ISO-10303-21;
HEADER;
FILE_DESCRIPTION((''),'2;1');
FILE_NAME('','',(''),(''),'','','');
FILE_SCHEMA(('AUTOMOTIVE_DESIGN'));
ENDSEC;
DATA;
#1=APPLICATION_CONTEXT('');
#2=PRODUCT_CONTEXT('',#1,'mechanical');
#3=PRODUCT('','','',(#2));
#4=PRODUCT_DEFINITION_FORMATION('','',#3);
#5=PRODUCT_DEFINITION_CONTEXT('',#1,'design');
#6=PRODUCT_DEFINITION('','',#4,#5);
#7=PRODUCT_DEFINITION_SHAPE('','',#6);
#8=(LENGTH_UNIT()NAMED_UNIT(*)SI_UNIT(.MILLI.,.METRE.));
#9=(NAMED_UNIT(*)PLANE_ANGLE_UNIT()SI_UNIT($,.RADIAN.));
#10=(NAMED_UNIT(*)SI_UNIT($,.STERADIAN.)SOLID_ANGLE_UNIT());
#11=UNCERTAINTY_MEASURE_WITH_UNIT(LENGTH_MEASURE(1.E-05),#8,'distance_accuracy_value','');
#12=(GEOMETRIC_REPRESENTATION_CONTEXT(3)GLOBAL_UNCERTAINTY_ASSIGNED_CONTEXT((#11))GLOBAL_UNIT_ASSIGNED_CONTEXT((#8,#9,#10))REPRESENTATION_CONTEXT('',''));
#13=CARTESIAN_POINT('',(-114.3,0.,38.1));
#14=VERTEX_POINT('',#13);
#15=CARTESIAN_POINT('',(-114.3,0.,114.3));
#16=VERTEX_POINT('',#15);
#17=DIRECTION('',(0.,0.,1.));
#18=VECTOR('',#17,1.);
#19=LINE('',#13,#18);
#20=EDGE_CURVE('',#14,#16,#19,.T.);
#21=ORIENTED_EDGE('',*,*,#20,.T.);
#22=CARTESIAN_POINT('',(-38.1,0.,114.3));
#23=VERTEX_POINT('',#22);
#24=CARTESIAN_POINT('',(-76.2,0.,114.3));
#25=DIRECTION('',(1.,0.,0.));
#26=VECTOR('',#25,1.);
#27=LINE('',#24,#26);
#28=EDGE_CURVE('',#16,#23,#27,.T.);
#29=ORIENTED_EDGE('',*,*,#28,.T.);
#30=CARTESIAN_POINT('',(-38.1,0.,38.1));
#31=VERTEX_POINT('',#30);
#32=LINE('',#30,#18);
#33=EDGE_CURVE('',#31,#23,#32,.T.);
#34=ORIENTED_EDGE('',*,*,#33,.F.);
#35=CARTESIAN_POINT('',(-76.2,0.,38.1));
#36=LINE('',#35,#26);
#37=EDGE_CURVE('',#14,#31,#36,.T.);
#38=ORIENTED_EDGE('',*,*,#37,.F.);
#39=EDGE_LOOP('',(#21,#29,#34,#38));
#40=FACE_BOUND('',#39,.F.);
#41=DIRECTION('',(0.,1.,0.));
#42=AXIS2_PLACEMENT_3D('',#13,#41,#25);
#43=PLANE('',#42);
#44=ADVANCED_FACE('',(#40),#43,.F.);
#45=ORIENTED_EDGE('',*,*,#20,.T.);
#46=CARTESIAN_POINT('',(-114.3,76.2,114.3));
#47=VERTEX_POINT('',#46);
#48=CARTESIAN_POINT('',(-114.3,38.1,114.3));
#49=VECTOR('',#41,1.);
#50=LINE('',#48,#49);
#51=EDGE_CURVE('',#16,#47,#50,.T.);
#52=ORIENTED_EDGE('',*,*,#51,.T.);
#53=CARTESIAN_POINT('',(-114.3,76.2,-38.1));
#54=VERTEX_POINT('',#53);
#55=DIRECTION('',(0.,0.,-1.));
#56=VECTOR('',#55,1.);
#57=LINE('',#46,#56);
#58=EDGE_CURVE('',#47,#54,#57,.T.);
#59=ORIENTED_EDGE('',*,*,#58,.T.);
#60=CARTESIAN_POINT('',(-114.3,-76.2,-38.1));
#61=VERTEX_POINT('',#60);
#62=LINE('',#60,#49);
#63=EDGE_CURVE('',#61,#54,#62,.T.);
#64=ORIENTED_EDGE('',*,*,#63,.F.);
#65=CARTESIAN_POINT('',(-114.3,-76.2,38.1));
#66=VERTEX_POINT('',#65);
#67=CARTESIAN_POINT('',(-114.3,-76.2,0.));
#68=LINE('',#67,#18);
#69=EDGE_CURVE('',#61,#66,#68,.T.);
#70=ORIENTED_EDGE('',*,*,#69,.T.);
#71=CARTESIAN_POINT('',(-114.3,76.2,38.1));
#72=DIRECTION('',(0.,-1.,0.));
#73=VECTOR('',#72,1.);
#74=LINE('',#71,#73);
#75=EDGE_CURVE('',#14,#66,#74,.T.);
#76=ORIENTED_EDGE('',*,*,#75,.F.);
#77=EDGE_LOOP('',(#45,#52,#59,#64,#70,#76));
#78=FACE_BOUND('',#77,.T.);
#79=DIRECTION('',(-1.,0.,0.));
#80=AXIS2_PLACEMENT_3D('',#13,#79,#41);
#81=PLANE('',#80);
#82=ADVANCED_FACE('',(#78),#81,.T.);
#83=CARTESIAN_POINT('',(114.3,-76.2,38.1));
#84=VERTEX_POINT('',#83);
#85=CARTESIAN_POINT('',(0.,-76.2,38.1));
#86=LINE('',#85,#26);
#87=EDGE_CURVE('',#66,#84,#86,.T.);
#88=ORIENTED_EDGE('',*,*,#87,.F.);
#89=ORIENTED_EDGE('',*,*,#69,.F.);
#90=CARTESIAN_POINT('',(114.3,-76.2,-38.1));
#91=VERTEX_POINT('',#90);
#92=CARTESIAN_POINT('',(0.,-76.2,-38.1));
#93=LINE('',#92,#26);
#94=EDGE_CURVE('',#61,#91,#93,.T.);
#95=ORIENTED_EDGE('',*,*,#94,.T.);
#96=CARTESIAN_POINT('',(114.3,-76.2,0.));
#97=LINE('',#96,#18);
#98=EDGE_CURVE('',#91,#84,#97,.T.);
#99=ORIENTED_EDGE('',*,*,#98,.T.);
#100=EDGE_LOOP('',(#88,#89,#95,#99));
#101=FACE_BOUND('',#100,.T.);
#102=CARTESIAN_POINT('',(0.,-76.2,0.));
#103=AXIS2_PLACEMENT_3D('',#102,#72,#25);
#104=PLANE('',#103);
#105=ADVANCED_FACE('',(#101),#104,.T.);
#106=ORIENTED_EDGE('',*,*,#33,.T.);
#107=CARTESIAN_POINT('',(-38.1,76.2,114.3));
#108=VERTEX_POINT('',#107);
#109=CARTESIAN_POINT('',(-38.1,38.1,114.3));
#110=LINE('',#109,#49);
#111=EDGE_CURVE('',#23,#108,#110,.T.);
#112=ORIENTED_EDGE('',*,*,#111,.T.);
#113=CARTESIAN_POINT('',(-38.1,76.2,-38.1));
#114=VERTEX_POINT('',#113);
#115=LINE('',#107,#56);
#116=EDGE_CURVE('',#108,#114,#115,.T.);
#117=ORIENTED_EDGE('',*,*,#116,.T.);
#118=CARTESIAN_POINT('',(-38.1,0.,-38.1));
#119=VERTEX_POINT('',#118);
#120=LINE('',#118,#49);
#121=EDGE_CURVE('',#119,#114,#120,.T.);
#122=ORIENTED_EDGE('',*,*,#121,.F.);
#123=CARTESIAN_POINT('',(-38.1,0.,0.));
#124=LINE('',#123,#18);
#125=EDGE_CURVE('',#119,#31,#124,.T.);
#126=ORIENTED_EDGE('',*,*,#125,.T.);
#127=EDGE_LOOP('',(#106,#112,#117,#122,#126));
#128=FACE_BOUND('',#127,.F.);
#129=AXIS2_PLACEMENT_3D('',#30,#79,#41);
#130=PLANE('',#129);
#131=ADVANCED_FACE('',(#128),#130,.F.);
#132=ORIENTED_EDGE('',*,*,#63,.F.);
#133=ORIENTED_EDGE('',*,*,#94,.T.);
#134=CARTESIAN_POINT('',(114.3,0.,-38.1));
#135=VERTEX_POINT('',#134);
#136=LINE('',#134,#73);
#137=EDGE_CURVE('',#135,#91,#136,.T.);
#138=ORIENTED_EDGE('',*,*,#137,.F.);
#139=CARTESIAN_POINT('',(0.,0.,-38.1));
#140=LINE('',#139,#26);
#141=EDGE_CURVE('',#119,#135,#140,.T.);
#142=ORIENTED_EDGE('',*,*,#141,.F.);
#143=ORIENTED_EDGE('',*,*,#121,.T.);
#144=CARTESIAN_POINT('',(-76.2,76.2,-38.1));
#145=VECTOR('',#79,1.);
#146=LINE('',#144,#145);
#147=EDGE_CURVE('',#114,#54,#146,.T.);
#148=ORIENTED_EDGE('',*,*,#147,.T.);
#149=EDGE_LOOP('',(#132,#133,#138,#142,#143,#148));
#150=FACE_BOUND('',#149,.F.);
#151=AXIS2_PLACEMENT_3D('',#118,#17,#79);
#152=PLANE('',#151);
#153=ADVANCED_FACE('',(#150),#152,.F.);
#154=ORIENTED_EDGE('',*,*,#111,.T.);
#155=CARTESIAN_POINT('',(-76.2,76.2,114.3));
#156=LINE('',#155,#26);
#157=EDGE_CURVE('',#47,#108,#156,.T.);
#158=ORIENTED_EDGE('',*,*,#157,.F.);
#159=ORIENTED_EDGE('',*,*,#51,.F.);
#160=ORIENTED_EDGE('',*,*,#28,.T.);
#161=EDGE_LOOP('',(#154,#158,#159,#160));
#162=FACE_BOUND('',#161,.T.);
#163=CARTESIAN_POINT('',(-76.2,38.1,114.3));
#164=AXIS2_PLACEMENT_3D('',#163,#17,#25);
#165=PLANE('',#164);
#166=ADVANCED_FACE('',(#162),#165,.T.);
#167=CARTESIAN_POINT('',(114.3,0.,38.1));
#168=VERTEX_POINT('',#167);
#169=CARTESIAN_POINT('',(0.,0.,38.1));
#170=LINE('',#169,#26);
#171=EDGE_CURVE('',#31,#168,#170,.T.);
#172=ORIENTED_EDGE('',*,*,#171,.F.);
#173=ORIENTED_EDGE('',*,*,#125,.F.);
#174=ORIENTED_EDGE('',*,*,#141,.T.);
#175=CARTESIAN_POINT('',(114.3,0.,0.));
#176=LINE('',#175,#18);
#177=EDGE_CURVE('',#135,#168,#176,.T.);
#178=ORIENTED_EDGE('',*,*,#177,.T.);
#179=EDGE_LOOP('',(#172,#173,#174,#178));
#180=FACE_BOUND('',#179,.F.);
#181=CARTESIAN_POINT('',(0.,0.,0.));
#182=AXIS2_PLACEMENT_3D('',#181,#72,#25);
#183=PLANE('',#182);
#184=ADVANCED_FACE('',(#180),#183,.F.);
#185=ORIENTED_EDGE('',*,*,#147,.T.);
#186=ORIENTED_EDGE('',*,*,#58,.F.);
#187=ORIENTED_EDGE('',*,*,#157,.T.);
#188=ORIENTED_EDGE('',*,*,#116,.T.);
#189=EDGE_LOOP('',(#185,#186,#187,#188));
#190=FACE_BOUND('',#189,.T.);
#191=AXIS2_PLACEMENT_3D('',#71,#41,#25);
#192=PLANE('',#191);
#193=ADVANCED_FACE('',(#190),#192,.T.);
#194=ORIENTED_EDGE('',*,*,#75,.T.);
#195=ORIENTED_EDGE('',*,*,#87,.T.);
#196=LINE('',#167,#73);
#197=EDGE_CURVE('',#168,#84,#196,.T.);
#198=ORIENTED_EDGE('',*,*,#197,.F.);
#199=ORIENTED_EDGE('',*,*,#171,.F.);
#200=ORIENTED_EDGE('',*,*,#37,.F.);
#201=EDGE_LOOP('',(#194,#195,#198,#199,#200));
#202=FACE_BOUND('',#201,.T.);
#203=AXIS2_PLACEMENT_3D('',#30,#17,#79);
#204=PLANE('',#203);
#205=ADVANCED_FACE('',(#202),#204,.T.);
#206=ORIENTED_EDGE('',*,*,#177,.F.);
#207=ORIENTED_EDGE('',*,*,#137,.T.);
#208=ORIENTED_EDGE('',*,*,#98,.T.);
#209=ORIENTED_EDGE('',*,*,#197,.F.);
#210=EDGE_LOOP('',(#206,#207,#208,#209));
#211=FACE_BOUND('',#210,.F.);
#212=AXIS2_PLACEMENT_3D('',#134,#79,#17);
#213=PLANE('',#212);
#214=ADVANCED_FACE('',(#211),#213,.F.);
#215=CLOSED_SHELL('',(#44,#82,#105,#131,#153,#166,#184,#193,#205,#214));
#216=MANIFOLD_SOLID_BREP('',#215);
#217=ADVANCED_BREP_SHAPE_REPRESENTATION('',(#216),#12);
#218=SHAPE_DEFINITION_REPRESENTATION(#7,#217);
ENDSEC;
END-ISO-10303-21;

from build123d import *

# Parameters (mm, degrees)
F1_W     = 228.6
F1_H     = 76.2
F2_DEPTH = 76.2
F3_W     = 76.2
F3_H     = 76.2
F4_DEPTH = 76.2
F5_W     = 76.2
F5_H     = 76.2
F6_DEPTH = 76.2


# Not quite as in the source:
# - a variable given as a bare number and used for a length is read in inches; the dataset says mm whatever the document's units were


with BuildPart() as f2:
    # F1 (on Front) → F2 (new body)
    with BuildSketch(Plane.XZ):
        Rectangle(F1_W, F1_H)
    extrude(amount=F2_DEPTH)

    # F3 (on face) → F4 (join)
    with BuildSketch(Plane(origin=(0, 0, 0), x_dir=(-1, 0, 0), z_dir=(0, 1, 0))):
        with Locations((76.2, 0)):
            Rectangle(F3_W, F3_H)
    extrude(amount=F4_DEPTH)

    # F5 (on face) → F6 (join)
    with BuildSketch(Plane.XY.offset(38.1)):
        with Locations((-76.2, 38.1)):
            Rectangle(F5_W, F5_H)
    extrude(amount=F6_DEPTH)


solid = f2.part
